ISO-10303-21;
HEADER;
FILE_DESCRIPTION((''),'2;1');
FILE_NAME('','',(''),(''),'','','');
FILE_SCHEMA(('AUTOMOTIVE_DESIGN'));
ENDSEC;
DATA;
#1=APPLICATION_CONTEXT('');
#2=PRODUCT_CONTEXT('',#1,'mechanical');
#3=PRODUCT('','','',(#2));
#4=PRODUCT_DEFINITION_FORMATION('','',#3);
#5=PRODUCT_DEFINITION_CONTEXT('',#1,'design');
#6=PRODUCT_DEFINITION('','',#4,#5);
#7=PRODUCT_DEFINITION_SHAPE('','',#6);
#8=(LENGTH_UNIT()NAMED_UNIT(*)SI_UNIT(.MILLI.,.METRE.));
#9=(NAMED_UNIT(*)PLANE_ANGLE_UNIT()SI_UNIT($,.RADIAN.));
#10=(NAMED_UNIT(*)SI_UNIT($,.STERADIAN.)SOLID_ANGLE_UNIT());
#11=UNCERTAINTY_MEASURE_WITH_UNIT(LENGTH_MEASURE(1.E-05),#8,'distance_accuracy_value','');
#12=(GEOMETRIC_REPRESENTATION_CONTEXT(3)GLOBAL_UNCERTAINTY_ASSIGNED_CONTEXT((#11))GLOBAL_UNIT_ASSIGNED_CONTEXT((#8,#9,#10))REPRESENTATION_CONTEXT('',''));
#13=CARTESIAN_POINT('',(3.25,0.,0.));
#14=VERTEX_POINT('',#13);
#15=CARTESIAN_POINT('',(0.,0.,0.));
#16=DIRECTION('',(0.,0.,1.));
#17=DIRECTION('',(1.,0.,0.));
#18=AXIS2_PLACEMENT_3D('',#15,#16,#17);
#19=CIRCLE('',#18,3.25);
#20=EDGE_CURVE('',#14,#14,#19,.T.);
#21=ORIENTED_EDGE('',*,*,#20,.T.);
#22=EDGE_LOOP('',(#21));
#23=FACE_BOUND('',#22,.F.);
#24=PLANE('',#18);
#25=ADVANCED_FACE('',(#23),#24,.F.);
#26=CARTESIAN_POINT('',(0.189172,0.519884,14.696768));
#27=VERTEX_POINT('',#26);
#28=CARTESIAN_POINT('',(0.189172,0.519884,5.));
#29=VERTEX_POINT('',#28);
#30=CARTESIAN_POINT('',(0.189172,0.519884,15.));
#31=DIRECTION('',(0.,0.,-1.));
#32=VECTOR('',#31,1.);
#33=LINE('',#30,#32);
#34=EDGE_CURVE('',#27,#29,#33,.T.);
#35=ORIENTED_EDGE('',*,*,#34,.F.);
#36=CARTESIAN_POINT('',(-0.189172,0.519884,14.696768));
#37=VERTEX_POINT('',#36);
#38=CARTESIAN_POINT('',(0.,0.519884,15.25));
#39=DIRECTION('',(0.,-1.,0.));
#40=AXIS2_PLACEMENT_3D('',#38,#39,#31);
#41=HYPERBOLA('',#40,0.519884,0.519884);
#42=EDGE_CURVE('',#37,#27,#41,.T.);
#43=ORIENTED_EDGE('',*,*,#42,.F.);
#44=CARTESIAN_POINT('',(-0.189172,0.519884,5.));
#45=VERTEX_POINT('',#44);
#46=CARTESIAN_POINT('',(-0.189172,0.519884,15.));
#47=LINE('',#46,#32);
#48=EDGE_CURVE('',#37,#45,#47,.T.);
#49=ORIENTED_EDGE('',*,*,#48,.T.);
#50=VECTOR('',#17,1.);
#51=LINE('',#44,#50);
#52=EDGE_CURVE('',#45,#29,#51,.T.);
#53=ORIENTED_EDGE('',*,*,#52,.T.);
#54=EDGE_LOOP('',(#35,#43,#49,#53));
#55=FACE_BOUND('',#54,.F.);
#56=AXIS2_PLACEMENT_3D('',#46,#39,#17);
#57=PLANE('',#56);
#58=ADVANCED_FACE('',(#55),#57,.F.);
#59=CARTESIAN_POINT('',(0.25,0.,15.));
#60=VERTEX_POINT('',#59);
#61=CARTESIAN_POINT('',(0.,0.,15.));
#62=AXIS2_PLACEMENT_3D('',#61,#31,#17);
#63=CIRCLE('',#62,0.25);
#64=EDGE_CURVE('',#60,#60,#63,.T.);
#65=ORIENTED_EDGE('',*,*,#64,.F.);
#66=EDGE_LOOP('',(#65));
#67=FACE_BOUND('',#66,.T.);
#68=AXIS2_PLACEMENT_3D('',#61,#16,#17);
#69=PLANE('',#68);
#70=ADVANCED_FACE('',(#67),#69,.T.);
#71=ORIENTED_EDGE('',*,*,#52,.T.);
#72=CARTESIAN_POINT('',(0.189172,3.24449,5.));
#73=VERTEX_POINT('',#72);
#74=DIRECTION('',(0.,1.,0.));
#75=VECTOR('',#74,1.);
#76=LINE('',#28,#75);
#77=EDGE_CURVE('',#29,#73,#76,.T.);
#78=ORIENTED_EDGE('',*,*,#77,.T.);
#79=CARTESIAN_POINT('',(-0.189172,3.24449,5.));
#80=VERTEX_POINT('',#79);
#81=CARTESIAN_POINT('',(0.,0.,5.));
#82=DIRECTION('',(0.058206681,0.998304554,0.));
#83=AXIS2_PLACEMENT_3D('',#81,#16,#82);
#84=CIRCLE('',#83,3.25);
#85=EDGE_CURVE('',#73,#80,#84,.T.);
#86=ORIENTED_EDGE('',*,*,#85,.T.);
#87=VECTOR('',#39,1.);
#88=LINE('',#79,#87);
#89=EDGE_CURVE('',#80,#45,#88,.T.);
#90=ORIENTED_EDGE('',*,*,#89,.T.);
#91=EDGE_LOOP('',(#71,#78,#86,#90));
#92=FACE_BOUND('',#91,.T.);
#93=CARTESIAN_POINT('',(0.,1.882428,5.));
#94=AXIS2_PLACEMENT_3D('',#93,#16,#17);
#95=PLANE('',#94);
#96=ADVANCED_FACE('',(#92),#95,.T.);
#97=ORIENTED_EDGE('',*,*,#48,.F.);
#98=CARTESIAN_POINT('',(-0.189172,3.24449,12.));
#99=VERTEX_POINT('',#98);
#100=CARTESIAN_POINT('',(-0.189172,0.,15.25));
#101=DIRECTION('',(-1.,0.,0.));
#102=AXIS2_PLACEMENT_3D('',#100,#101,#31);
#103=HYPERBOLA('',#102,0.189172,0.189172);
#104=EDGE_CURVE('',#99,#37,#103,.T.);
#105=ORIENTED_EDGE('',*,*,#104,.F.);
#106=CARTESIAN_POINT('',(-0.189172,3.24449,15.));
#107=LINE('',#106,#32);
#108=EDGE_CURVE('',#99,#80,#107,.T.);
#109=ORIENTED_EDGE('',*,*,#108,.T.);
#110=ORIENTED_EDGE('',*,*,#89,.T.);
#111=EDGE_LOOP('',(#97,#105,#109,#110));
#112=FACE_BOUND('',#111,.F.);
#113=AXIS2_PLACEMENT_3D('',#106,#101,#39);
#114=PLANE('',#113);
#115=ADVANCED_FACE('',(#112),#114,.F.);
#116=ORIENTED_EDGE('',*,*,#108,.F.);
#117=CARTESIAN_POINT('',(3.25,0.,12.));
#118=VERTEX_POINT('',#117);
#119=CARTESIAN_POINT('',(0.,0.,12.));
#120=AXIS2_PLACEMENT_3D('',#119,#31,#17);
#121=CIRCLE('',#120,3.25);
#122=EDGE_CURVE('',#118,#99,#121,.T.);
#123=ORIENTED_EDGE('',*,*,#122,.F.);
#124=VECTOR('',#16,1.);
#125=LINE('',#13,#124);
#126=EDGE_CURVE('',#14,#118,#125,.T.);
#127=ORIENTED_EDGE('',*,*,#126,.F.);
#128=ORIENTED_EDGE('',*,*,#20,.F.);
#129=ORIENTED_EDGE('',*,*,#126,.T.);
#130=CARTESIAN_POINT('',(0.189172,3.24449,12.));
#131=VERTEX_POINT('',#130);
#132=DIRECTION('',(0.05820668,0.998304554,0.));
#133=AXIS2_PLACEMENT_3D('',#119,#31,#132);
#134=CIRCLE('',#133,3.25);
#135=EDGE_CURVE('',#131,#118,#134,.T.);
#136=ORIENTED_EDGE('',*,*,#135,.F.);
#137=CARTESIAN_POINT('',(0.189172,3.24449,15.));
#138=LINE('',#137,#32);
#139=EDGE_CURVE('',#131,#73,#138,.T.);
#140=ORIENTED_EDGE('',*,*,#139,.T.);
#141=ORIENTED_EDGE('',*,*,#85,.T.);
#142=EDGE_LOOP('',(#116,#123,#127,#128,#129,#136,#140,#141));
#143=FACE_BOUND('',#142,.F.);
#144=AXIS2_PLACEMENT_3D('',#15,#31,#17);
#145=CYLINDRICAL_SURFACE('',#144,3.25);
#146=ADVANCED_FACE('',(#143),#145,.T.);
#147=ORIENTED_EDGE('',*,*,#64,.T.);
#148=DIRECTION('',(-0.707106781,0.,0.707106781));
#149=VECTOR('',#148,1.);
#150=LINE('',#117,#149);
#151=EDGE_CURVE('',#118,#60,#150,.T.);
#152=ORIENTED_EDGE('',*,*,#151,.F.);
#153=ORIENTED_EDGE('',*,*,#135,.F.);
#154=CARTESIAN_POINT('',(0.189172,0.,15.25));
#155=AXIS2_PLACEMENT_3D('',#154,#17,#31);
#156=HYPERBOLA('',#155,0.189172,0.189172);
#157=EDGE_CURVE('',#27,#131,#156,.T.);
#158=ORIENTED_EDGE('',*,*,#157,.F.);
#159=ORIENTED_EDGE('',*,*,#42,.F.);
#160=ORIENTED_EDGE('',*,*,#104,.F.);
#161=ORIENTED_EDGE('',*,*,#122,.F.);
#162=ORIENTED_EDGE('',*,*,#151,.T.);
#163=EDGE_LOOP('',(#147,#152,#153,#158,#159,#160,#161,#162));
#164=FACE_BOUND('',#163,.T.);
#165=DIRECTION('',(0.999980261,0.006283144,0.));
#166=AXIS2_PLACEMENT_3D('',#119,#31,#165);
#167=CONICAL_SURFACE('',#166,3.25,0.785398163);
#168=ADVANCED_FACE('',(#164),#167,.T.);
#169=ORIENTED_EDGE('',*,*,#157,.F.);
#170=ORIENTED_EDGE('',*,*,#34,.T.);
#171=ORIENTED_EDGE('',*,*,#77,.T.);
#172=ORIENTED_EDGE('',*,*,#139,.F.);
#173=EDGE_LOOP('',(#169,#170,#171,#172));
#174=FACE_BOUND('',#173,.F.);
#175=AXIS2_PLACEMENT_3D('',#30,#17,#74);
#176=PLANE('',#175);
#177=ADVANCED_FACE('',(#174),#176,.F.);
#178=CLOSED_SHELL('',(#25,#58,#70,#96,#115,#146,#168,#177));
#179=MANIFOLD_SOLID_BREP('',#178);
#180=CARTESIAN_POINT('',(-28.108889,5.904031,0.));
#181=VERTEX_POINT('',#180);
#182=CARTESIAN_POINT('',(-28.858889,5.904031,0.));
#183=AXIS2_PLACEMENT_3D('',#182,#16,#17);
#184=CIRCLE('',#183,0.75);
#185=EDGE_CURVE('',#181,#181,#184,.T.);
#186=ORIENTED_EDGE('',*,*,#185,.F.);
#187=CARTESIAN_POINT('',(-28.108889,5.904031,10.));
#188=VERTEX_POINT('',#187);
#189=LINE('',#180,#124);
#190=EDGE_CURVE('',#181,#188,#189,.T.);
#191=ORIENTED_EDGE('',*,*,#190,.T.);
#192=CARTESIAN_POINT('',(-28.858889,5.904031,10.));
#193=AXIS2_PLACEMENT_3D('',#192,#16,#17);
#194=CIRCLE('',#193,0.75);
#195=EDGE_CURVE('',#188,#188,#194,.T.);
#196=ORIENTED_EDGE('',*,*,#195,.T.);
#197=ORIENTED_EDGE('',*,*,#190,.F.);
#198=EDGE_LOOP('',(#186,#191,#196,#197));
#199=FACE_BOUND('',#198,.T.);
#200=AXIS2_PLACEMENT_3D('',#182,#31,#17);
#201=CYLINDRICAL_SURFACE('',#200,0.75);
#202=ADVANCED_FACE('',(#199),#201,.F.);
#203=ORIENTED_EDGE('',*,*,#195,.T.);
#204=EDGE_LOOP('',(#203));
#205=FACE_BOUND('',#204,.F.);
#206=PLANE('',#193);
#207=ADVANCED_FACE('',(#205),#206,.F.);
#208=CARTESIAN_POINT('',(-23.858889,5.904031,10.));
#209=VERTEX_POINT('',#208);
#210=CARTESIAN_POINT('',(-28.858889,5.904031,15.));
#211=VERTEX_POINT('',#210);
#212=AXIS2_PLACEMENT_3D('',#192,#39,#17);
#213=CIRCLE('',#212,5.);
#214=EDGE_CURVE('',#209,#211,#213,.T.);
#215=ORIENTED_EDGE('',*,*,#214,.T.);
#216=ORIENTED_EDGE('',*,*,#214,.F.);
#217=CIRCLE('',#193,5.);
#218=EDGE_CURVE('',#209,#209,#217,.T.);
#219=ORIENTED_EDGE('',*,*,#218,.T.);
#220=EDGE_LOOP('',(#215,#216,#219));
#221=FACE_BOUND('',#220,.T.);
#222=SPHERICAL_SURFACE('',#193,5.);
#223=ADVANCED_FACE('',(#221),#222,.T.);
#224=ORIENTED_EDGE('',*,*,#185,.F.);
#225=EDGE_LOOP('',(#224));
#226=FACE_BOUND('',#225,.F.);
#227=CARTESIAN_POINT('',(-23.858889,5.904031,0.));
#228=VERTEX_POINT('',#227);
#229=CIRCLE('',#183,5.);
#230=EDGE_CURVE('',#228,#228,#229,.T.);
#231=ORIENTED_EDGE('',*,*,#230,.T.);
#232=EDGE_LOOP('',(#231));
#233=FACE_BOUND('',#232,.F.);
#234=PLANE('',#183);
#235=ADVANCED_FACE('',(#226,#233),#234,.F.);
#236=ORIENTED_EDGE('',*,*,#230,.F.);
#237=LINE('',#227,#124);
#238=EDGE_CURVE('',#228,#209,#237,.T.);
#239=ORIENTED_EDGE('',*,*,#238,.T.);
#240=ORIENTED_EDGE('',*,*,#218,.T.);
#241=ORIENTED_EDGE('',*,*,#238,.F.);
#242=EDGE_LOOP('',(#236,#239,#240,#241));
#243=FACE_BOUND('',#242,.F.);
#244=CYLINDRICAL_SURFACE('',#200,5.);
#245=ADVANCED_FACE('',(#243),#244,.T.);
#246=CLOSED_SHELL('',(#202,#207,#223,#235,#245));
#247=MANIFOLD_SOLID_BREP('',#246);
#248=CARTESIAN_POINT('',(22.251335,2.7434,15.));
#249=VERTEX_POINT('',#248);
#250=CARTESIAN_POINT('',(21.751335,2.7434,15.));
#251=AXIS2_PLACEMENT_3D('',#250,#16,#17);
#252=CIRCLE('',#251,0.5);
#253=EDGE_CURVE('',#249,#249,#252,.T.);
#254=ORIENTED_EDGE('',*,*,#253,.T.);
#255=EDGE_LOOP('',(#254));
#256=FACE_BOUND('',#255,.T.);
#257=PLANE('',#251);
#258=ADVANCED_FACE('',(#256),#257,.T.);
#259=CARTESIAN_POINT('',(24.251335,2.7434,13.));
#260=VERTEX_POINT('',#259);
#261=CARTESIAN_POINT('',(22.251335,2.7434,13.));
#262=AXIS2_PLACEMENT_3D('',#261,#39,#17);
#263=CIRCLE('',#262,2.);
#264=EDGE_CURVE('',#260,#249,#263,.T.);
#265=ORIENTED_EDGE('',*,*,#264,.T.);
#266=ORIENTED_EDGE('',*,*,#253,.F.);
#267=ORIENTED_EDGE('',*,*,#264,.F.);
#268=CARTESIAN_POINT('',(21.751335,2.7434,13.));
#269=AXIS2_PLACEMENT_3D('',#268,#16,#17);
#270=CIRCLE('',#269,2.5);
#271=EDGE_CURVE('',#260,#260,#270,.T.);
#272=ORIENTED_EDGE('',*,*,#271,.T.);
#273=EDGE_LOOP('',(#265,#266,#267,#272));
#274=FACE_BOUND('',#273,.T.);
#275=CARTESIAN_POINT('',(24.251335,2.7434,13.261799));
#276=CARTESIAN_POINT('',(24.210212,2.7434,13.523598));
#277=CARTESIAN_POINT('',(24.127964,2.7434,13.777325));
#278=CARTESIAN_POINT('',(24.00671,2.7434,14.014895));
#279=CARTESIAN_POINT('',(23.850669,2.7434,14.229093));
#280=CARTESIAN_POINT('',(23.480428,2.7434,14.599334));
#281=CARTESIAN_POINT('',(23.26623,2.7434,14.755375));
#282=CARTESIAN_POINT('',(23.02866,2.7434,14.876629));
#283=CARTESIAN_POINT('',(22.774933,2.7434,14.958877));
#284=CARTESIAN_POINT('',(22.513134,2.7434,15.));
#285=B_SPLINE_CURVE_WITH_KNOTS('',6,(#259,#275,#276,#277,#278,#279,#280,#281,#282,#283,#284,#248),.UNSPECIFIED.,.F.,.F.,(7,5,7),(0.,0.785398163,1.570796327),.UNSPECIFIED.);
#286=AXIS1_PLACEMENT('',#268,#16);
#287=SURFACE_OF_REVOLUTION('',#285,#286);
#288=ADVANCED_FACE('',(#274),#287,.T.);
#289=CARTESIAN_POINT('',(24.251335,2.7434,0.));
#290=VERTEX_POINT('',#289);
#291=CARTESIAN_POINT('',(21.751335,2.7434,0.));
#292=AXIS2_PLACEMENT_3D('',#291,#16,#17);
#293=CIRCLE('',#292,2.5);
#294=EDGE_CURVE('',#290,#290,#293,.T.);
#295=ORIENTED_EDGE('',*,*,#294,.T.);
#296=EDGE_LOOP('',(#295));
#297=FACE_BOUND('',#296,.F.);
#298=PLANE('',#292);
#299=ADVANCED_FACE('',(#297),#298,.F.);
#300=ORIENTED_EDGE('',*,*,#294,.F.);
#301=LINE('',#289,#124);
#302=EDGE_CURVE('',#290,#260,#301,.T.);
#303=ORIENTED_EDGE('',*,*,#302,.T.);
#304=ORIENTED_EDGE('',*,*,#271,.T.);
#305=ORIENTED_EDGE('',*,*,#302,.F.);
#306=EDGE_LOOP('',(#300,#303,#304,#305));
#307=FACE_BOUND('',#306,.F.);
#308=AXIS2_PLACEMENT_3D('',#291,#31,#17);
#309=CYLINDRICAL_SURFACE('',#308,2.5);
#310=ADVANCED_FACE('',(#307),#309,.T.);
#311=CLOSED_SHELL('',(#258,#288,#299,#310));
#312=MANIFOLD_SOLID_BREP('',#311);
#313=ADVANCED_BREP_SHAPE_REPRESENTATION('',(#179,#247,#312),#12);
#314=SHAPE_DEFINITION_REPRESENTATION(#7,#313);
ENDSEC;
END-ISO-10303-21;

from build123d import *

# Parameters (mm, degrees)
F0_R        = 3.25
F1_DEPTH    = 15
F0_R_2      = 2.5
F0_R_3      = 5
F3_DEPTH    = 10
F4_R        = 0.75
F5_DEPTH    = 10
F6_R        = 5
F7_T2_ANGLE = 359.64
F7_T4_ANGLE = 222.7260056462
F8_R        = 2


# Not quite as in the source:
# - a fillet or chamfer that OpenCascade refuses, or shapes differently, is made with other operations: its cross-section is extruded or revolved along the edge and cut away or added


with BuildPart() as f1:
    # F0 (on Top) → F1 (new body)
    with BuildSketch(Plane.XY):
        Circle(F0_R)
    extrude(amount=F1_DEPTH)

    # F2 (on face) → F3 (cut)
    with BuildSketch(Plane.XY.offset(15)):
        with BuildLine():
            Line((0.1891717111, 0.5198842073), (0.1891717111, 3.2444898002))
            ThreePointArc((0.1891717111, 3.2444898002), (0, 3.25), (-0.1891717111, 3.2444898002))
            Line((-0.1891717111, 3.2444898002), (-0.1891717111, 0.5198842073))
            Line((-0.1891717111, 0.5198842073), (0.1891717111, 0.5198842073))
        make_face()
    extrude(amount=-F3_DEPTH, mode=Mode.SUBTRACT)

    # F7: chamfer of 3 on 2 edges, made by hand

    # F7_s1 → F7_t2 (revolve, cut)
    with BuildSketch(Plane(origin=(0, 0, 0), x_dir=(0, 0, 1), z_dir=(0.006283144, -0.9999802609, 0))):
        Polygon((12, -3.25), (15, -0.25), (15, -3.25), align=None)
    revolve(axis=Axis((0, 0, 15), (0, 0, 1)), revolution_arc=F7_T2_ANGLE, mode=Mode.SUBTRACT)

    # F7_s3 → F7_t4 (revolve, cut)
    with BuildSketch(Plane.XZ):
        Polygon((3.25, 12), (0.25, 15), (3.25, 15), align=None)
    revolve(axis=Axis((0, 0, 15), (0, 0, 1)), revolution_arc=F7_T4_ANGLE, mode=Mode.SUBTRACT)


with BuildPart() as f1b:
    # F0 (on Top) → F1, piece 2 (new body)
    with BuildSketch(Plane.XY):
        with Locations((21.7513348907, 2.7434001677)):
            Circle(F0_R_2)
    extrude(amount=F1_DEPTH)

    # F8
    f8_edges = [f1b.edges().sort_by_distance(p)[0] for p in [
        (19.251335, 2.7434, 15),
    ]]
    fillet(f8_edges, radius=F8_R)


with BuildPart() as f1c:
    # F0 (on Top) → F1, piece 3 (new body)
    with BuildSketch(Plane.XY):
        with Locations((-28.8588888943, 5.9040305205)):
            Circle(F0_R_3)
    extrude(amount=F1_DEPTH)

    # F4 (on Top) → F5 (cut)
    with BuildSketch(Plane.XY):
        with Locations((-28.8588888943, 5.9040305205)):
            Circle(F4_R)
        Circle(F4_R)
        with Locations((21.7513348907, 2.7434001677)):
            Circle(F4_R)
    extrude(amount=F5_DEPTH, mode=Mode.SUBTRACT)

    # F6
    f6_edges = [f1c.edges().sort_by_distance(p)[0] for p in [
        (-33.858889, 5.904031, 15),
    ]]
    fillet(f6_edges, radius=F6_R)


solid = Compound([f1.part, f1b.part, f1c.part])
